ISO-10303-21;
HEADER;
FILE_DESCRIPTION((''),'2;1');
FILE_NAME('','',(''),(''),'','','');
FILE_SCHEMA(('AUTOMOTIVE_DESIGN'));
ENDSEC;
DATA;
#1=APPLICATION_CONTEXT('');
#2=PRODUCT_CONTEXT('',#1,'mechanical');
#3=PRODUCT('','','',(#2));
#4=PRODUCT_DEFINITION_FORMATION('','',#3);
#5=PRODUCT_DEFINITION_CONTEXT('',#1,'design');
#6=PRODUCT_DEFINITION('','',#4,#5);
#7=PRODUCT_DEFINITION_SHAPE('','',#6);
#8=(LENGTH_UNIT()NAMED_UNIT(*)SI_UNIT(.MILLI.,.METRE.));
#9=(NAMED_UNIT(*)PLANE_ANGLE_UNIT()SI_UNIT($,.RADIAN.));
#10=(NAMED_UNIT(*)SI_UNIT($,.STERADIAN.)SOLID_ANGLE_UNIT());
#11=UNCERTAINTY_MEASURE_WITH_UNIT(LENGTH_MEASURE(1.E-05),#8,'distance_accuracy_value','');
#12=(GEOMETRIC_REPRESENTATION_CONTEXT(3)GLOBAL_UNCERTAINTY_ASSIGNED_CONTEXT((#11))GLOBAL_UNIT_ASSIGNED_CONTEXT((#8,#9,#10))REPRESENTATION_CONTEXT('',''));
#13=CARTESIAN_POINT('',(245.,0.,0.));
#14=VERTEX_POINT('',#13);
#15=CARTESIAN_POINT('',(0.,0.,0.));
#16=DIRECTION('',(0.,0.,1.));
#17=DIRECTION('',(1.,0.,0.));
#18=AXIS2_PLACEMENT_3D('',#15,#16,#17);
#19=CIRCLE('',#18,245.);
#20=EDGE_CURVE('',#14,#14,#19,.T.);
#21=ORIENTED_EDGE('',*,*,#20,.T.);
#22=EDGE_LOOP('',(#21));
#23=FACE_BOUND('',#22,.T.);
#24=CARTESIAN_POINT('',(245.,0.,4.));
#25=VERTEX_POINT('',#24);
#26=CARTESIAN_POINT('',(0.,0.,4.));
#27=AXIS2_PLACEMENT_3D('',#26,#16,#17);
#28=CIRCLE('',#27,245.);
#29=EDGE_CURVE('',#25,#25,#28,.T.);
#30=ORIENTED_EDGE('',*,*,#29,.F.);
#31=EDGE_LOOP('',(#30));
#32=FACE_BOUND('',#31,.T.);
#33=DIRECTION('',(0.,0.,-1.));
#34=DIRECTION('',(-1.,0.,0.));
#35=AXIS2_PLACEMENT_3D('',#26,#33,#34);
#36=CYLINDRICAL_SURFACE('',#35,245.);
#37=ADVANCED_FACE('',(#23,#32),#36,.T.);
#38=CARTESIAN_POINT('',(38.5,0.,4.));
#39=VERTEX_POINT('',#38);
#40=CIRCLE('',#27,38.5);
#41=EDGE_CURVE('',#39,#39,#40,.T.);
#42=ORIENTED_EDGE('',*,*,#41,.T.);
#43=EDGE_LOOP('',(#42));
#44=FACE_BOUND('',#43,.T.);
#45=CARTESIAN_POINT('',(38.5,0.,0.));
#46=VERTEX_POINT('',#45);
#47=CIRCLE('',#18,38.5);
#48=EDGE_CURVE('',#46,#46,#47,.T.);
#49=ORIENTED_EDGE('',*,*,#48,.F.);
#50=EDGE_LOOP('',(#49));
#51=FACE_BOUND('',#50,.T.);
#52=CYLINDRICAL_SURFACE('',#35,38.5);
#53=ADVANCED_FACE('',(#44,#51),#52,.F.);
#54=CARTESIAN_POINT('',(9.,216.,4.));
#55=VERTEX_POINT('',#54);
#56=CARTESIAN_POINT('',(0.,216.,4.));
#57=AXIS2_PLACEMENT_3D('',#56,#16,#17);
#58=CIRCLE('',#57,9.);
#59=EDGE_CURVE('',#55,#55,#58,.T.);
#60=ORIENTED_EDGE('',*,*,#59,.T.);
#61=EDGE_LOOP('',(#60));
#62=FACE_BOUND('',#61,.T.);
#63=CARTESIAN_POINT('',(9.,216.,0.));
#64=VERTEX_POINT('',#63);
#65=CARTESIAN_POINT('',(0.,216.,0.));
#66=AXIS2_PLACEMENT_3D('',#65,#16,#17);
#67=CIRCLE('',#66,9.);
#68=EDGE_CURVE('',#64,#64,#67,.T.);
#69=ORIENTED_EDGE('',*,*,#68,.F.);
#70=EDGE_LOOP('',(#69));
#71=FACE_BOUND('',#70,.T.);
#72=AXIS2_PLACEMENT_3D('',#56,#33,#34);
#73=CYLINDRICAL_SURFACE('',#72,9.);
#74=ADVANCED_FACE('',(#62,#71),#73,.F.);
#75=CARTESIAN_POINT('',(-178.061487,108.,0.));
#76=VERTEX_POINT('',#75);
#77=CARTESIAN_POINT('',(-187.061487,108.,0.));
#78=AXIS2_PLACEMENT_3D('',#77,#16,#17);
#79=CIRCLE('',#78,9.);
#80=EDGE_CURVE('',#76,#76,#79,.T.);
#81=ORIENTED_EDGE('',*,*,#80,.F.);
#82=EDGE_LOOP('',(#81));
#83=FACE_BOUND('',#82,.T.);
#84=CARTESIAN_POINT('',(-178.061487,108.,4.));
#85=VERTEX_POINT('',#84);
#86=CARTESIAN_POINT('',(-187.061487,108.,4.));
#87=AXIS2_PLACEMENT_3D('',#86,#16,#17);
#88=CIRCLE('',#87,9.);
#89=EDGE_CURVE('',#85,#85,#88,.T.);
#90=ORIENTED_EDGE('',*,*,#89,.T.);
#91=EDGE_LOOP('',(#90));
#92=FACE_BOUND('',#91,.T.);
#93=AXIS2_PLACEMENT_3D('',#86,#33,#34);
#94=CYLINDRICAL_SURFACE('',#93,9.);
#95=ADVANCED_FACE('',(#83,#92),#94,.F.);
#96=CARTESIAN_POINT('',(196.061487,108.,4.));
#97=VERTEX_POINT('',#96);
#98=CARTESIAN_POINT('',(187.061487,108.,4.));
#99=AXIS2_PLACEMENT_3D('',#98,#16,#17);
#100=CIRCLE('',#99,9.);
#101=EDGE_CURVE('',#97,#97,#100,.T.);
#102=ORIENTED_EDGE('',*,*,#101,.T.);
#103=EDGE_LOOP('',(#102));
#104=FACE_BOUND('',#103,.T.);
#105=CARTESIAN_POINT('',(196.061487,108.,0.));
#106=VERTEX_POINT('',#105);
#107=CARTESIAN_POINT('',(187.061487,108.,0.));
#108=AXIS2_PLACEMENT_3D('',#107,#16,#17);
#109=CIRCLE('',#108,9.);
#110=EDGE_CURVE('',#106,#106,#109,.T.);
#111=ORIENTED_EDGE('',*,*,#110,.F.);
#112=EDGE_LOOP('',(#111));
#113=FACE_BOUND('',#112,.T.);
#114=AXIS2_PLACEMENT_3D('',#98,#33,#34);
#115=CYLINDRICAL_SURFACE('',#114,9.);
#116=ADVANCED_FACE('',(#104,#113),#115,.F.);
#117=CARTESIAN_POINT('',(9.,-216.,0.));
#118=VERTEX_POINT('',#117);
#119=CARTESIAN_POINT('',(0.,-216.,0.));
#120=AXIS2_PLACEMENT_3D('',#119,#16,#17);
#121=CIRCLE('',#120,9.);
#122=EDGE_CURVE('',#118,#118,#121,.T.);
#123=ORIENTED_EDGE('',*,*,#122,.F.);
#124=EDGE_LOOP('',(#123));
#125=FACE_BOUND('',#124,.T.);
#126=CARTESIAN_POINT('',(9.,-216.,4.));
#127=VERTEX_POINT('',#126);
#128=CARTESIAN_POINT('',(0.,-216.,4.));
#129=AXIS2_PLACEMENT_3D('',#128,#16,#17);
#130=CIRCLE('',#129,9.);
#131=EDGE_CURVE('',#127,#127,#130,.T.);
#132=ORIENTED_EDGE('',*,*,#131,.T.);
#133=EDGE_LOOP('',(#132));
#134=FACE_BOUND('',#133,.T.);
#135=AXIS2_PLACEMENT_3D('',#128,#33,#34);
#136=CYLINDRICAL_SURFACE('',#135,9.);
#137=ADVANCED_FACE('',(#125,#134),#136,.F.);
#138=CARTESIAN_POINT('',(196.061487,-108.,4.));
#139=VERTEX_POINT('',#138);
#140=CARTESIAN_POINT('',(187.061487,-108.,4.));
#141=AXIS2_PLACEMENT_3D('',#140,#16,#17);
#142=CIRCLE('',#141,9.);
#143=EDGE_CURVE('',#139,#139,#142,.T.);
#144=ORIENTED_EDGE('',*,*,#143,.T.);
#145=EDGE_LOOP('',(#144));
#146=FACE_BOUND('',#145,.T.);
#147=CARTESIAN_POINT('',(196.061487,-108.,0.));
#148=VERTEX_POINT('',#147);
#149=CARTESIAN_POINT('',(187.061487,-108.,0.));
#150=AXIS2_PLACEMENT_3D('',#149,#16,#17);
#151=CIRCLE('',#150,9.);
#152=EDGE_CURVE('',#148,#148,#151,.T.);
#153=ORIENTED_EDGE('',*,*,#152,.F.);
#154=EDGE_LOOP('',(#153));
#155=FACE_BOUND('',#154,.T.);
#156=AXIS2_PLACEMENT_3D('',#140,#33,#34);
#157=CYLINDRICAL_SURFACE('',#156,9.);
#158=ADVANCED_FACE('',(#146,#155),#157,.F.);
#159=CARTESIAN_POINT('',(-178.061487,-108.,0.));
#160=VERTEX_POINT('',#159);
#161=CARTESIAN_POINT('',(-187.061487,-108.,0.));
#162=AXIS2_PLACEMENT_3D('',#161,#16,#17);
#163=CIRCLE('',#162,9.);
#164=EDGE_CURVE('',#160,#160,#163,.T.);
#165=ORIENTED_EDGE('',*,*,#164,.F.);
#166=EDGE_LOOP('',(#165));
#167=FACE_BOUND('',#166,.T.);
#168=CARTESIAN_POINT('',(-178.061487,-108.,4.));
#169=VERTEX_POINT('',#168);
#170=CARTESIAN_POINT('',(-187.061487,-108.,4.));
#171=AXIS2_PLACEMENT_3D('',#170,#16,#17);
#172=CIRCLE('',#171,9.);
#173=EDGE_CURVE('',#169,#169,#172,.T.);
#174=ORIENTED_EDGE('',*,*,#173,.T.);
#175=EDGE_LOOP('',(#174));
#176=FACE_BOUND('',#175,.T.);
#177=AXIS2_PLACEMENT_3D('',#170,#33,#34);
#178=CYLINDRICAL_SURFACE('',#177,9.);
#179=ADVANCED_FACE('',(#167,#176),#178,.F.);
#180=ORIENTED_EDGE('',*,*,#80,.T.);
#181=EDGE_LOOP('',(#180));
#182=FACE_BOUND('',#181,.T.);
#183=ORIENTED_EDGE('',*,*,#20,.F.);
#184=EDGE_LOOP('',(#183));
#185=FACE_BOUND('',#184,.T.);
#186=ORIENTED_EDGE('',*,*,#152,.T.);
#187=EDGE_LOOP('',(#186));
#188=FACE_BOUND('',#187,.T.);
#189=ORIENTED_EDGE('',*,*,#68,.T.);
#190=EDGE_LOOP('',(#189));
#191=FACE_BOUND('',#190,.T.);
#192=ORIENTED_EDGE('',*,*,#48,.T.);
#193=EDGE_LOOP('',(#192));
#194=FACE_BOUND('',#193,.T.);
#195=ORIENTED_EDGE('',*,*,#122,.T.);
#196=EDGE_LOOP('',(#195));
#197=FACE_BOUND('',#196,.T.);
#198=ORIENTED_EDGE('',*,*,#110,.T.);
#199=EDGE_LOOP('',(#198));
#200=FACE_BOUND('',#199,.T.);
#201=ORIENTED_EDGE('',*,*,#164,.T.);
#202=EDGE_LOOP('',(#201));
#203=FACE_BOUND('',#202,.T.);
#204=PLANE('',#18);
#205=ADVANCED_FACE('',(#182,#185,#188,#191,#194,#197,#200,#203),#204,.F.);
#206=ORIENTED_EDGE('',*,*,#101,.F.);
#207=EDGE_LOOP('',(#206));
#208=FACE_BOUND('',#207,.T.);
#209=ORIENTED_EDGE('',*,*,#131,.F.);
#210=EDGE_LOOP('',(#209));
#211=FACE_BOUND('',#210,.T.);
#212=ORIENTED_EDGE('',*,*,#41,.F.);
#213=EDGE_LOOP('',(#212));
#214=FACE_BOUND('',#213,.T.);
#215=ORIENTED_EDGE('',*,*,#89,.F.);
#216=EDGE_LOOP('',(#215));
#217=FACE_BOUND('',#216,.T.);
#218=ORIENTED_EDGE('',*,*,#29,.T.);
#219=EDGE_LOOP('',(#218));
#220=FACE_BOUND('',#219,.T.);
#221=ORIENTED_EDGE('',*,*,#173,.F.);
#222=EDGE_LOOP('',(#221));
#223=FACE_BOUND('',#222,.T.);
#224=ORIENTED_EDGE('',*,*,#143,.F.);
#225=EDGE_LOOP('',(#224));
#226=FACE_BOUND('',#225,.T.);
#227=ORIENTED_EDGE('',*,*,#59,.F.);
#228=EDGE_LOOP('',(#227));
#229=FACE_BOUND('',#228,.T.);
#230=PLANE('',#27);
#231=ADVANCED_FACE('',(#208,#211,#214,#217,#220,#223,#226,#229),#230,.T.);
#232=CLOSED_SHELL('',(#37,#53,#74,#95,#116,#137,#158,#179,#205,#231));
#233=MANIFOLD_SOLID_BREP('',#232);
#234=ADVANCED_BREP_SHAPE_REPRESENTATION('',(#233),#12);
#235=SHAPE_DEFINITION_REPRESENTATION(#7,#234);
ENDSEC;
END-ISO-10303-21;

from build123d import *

# Parameters (mm, degrees)
SKETCH_1_R             = 245
SKETCH_1_R_2           = 38.5
SKETCH_1_R_3           = 9
SM_BASE_FLANGE_1_DEPTH = 4


# Sheet-metal steps are written as plain solids
with BuildPart() as part:
    # Sketch 1 → Базовая кромка1 (new body)
    with BuildSketch(Plane.XY):
        Circle(SKETCH_1_R)
        Circle(SKETCH_1_R_2, mode=Mode.SUBTRACT)
        with Locations((0, 216)):
            Circle(SKETCH_1_R_3, mode=Mode.SUBTRACT)
        with Locations((187.061487217, 108)):
            Circle(SKETCH_1_R_3, mode=Mode.SUBTRACT)
        with Locations((187.061487217, -108)):
            Circle(SKETCH_1_R_3, mode=Mode.SUBTRACT)
        with Locations((0, -216)):
            Circle(SKETCH_1_R_3, mode=Mode.SUBTRACT)
        with Locations((-187.061487217, -108)):
            Circle(SKETCH_1_R_3, mode=Mode.SUBTRACT)
        with Locations((-187.061487217, 108)):
            Circle(SKETCH_1_R_3, mode=Mode.SUBTRACT)
    extrude(amount=SM_BASE_FLANGE_1_DEPTH)


solid = part.part
